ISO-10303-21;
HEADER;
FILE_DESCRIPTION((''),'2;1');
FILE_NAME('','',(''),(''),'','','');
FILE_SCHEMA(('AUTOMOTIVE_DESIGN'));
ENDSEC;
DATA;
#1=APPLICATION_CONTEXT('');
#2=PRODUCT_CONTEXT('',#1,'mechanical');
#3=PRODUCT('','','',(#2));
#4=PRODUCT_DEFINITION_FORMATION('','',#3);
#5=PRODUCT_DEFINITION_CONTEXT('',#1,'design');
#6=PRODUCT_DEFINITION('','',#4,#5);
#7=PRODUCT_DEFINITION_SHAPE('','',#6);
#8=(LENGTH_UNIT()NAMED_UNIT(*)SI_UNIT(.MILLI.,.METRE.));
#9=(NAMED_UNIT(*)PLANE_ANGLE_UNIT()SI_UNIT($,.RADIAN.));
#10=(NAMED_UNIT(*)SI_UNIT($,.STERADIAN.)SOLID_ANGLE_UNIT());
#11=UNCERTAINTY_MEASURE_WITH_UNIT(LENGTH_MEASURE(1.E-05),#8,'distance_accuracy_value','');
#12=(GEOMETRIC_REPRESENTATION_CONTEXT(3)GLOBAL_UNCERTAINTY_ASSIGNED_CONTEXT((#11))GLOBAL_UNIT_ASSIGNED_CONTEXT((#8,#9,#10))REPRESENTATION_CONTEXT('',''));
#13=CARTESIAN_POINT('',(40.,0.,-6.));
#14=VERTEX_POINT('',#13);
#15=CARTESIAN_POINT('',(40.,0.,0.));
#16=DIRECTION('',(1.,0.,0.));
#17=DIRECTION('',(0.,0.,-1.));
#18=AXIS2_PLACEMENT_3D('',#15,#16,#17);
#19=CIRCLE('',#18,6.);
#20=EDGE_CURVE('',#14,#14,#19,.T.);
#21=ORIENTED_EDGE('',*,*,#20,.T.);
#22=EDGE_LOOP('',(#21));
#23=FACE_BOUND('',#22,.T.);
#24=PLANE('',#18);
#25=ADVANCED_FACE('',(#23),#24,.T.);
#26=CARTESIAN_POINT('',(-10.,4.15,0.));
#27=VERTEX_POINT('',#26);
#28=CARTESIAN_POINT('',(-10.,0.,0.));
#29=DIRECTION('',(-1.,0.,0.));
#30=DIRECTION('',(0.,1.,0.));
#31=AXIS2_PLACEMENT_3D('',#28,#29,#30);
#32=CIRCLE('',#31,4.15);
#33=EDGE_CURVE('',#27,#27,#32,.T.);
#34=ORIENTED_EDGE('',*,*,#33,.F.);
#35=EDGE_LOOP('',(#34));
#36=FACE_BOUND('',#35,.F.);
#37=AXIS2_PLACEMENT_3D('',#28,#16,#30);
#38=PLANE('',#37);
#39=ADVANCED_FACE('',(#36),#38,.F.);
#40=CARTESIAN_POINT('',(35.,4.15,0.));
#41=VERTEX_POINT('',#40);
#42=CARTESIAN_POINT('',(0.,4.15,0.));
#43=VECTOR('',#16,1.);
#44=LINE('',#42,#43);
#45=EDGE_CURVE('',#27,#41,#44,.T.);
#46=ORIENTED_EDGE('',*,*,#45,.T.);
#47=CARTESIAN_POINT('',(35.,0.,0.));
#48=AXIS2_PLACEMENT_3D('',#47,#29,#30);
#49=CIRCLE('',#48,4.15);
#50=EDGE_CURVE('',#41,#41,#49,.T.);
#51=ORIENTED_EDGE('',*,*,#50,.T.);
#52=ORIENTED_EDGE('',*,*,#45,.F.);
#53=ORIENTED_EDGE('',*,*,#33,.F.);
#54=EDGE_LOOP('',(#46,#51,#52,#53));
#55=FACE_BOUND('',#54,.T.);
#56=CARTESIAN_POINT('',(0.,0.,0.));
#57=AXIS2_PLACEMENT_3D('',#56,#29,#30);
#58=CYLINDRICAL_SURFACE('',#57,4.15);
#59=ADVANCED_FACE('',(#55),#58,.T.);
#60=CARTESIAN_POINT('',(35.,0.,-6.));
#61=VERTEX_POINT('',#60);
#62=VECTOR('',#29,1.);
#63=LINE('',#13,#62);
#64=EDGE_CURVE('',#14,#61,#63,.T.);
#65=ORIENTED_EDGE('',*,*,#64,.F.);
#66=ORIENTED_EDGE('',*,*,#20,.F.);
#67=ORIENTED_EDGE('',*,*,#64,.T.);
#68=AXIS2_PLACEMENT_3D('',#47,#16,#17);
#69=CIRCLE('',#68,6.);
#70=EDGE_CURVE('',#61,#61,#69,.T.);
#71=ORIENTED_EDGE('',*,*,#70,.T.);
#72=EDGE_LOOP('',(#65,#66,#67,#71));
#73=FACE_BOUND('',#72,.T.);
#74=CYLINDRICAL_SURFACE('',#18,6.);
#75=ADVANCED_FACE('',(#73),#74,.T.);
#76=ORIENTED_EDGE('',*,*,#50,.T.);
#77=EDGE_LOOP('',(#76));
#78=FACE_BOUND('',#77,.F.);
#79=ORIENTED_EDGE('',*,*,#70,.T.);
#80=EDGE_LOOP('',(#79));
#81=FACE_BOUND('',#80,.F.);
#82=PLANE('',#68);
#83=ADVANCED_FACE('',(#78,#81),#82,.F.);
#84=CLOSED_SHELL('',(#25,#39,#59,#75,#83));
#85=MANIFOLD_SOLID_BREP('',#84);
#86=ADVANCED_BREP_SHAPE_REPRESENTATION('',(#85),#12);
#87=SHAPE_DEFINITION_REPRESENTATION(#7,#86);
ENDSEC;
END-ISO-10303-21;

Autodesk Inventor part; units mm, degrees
ref_plane "YZ Plane" through (0, 0, 0) normal (1, 0, 0) x (0, 1, 0)
ref_plane "XZ Plane" through (0, 0, 0) normal (0, 1, 0) x (-1, 0, 0)
ref_plane "XY Plane" through (0, 0, 0) normal (0, 0, 1) x (1, 0, 0)
sketch "Sketch1" plane through (0, 0, 0) normal (1, 0, 0) x (0, 1, 0)
  circle A0 centre (0, 0) radius 4.15
  dimension "d0" = 8.3
extrude "Extrusion1" add sketch "Sketch1" along normal blind 40
sketch "Sketch2" plane through (40, 0, 0) normal (1, 0, 0) x (0, 0, -1)
  circle A0 centre (0, 0) radius 6
extrude "Extrusion2" add sketch "Sketch2" against normal blind 5
thicken "Thicken1" operation add thickness 10 both sides no extend neighbours yes toward (-1, 0, 0) faces at (0, 1.0354, 0.9173)
properties part number "pin"
